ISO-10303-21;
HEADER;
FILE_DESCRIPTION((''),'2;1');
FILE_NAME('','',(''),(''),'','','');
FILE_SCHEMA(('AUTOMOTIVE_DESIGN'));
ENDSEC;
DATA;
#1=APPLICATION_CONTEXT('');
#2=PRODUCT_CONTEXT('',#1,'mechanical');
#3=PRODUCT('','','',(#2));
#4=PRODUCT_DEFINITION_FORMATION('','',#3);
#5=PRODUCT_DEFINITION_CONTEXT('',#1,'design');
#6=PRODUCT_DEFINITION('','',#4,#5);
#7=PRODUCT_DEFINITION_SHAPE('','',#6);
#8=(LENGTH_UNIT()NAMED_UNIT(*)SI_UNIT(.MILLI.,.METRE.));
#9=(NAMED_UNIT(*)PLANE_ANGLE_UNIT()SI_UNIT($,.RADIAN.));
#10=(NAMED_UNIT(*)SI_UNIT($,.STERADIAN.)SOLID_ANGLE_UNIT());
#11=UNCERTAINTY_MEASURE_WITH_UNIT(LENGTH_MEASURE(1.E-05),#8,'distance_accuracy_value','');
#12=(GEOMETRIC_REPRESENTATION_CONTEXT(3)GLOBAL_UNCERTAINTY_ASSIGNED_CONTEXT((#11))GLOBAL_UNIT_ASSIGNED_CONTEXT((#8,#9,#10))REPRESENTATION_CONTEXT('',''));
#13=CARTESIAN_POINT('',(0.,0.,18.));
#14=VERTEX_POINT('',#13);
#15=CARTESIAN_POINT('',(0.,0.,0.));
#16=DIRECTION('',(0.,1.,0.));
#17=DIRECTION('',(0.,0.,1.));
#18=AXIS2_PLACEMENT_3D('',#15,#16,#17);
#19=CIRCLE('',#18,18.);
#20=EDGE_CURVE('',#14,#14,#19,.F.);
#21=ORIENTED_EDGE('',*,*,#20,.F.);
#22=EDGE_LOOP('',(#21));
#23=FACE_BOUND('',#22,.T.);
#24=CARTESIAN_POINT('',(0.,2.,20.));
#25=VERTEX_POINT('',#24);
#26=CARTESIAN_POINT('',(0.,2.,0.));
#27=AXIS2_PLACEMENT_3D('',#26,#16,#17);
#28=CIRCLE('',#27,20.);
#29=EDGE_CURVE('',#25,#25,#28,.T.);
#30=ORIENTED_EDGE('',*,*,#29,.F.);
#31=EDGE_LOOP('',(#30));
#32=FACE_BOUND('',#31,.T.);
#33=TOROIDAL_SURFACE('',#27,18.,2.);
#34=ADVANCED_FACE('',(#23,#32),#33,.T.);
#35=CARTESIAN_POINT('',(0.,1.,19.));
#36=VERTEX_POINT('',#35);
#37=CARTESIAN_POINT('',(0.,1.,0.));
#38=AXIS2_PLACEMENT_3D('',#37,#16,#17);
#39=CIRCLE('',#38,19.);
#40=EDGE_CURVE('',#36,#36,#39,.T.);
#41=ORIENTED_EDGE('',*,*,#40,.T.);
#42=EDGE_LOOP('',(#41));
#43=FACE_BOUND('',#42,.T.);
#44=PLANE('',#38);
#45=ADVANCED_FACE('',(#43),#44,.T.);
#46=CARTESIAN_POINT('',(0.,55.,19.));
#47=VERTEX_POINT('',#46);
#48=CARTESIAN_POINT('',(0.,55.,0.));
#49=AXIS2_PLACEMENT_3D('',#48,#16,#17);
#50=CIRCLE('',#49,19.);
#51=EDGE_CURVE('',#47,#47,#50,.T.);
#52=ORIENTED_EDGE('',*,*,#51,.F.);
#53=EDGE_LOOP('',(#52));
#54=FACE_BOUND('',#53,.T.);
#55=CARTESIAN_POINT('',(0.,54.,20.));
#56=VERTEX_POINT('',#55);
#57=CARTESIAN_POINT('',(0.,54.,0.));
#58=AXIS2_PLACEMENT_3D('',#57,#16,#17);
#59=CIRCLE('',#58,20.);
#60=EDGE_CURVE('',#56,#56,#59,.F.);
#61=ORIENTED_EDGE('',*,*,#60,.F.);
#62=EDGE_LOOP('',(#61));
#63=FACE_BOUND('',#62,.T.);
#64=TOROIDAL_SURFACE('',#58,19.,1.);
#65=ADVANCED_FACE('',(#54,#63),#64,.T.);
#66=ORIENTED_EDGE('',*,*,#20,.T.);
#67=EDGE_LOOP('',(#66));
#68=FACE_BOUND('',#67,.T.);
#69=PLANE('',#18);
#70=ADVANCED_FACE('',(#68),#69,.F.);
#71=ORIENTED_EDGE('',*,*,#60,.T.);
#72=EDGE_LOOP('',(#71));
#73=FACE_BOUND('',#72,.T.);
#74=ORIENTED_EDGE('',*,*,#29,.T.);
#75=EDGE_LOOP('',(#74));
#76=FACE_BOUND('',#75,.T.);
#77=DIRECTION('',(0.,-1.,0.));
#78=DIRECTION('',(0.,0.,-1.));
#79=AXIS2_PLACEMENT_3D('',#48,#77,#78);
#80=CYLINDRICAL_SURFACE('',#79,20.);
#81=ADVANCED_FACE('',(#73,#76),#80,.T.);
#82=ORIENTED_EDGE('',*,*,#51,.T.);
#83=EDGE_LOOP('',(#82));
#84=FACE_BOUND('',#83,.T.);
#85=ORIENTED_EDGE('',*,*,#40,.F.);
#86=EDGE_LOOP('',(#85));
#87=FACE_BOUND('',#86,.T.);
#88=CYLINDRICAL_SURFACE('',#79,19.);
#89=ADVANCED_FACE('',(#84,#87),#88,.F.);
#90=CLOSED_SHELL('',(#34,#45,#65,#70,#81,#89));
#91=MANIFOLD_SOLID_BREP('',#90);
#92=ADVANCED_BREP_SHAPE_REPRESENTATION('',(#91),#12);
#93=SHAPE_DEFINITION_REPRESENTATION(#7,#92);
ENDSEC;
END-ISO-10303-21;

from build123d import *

# Parameters (mm, degrees)
SKETCH1_R           = 20
BOSS_EXTRUDE1_DEPTH = 55
SHELL1_T            = -1
FILLET1_R           = 2
FILLET7_R           = 1


with BuildPart() as part:
    # Sketch1 → Boss-Extrude1 (new body)
    with BuildSketch(Plane(origin=(0, 0, 0), x_dir=(1, 0, 0), z_dir=(0, 1, 0))):
        with Locations(Location((0, 0, 0), (0, 0, 270))):
            Circle(SKETCH1_R)
    extrude(amount=BOSS_EXTRUDE1_DEPTH)

    # Shell1
    shell1_openings = [part.faces().sort_by_distance(p)[0] for p in [
        (0, 55, 0),
    ]]
    offset(amount=SHELL1_T, openings=shell1_openings, kind=Kind.INTERSECTION)

    # Fillet1
    fillet1_edges = [part.edges().sort_by_distance(p)[0] for p in [
        (0, 0, -20),
    ]]
    fillet(fillet1_edges, radius=FILLET1_R)

    # Fillet7
    fillet7_edges = [part.edges().sort_by_distance(p)[0] for p in [
        (0, 55, -20),
    ]]
    fillet(fillet7_edges, radius=FILLET7_R - 0.0001)  # a hair under: the kernel refuses the full size


solid = part.part
